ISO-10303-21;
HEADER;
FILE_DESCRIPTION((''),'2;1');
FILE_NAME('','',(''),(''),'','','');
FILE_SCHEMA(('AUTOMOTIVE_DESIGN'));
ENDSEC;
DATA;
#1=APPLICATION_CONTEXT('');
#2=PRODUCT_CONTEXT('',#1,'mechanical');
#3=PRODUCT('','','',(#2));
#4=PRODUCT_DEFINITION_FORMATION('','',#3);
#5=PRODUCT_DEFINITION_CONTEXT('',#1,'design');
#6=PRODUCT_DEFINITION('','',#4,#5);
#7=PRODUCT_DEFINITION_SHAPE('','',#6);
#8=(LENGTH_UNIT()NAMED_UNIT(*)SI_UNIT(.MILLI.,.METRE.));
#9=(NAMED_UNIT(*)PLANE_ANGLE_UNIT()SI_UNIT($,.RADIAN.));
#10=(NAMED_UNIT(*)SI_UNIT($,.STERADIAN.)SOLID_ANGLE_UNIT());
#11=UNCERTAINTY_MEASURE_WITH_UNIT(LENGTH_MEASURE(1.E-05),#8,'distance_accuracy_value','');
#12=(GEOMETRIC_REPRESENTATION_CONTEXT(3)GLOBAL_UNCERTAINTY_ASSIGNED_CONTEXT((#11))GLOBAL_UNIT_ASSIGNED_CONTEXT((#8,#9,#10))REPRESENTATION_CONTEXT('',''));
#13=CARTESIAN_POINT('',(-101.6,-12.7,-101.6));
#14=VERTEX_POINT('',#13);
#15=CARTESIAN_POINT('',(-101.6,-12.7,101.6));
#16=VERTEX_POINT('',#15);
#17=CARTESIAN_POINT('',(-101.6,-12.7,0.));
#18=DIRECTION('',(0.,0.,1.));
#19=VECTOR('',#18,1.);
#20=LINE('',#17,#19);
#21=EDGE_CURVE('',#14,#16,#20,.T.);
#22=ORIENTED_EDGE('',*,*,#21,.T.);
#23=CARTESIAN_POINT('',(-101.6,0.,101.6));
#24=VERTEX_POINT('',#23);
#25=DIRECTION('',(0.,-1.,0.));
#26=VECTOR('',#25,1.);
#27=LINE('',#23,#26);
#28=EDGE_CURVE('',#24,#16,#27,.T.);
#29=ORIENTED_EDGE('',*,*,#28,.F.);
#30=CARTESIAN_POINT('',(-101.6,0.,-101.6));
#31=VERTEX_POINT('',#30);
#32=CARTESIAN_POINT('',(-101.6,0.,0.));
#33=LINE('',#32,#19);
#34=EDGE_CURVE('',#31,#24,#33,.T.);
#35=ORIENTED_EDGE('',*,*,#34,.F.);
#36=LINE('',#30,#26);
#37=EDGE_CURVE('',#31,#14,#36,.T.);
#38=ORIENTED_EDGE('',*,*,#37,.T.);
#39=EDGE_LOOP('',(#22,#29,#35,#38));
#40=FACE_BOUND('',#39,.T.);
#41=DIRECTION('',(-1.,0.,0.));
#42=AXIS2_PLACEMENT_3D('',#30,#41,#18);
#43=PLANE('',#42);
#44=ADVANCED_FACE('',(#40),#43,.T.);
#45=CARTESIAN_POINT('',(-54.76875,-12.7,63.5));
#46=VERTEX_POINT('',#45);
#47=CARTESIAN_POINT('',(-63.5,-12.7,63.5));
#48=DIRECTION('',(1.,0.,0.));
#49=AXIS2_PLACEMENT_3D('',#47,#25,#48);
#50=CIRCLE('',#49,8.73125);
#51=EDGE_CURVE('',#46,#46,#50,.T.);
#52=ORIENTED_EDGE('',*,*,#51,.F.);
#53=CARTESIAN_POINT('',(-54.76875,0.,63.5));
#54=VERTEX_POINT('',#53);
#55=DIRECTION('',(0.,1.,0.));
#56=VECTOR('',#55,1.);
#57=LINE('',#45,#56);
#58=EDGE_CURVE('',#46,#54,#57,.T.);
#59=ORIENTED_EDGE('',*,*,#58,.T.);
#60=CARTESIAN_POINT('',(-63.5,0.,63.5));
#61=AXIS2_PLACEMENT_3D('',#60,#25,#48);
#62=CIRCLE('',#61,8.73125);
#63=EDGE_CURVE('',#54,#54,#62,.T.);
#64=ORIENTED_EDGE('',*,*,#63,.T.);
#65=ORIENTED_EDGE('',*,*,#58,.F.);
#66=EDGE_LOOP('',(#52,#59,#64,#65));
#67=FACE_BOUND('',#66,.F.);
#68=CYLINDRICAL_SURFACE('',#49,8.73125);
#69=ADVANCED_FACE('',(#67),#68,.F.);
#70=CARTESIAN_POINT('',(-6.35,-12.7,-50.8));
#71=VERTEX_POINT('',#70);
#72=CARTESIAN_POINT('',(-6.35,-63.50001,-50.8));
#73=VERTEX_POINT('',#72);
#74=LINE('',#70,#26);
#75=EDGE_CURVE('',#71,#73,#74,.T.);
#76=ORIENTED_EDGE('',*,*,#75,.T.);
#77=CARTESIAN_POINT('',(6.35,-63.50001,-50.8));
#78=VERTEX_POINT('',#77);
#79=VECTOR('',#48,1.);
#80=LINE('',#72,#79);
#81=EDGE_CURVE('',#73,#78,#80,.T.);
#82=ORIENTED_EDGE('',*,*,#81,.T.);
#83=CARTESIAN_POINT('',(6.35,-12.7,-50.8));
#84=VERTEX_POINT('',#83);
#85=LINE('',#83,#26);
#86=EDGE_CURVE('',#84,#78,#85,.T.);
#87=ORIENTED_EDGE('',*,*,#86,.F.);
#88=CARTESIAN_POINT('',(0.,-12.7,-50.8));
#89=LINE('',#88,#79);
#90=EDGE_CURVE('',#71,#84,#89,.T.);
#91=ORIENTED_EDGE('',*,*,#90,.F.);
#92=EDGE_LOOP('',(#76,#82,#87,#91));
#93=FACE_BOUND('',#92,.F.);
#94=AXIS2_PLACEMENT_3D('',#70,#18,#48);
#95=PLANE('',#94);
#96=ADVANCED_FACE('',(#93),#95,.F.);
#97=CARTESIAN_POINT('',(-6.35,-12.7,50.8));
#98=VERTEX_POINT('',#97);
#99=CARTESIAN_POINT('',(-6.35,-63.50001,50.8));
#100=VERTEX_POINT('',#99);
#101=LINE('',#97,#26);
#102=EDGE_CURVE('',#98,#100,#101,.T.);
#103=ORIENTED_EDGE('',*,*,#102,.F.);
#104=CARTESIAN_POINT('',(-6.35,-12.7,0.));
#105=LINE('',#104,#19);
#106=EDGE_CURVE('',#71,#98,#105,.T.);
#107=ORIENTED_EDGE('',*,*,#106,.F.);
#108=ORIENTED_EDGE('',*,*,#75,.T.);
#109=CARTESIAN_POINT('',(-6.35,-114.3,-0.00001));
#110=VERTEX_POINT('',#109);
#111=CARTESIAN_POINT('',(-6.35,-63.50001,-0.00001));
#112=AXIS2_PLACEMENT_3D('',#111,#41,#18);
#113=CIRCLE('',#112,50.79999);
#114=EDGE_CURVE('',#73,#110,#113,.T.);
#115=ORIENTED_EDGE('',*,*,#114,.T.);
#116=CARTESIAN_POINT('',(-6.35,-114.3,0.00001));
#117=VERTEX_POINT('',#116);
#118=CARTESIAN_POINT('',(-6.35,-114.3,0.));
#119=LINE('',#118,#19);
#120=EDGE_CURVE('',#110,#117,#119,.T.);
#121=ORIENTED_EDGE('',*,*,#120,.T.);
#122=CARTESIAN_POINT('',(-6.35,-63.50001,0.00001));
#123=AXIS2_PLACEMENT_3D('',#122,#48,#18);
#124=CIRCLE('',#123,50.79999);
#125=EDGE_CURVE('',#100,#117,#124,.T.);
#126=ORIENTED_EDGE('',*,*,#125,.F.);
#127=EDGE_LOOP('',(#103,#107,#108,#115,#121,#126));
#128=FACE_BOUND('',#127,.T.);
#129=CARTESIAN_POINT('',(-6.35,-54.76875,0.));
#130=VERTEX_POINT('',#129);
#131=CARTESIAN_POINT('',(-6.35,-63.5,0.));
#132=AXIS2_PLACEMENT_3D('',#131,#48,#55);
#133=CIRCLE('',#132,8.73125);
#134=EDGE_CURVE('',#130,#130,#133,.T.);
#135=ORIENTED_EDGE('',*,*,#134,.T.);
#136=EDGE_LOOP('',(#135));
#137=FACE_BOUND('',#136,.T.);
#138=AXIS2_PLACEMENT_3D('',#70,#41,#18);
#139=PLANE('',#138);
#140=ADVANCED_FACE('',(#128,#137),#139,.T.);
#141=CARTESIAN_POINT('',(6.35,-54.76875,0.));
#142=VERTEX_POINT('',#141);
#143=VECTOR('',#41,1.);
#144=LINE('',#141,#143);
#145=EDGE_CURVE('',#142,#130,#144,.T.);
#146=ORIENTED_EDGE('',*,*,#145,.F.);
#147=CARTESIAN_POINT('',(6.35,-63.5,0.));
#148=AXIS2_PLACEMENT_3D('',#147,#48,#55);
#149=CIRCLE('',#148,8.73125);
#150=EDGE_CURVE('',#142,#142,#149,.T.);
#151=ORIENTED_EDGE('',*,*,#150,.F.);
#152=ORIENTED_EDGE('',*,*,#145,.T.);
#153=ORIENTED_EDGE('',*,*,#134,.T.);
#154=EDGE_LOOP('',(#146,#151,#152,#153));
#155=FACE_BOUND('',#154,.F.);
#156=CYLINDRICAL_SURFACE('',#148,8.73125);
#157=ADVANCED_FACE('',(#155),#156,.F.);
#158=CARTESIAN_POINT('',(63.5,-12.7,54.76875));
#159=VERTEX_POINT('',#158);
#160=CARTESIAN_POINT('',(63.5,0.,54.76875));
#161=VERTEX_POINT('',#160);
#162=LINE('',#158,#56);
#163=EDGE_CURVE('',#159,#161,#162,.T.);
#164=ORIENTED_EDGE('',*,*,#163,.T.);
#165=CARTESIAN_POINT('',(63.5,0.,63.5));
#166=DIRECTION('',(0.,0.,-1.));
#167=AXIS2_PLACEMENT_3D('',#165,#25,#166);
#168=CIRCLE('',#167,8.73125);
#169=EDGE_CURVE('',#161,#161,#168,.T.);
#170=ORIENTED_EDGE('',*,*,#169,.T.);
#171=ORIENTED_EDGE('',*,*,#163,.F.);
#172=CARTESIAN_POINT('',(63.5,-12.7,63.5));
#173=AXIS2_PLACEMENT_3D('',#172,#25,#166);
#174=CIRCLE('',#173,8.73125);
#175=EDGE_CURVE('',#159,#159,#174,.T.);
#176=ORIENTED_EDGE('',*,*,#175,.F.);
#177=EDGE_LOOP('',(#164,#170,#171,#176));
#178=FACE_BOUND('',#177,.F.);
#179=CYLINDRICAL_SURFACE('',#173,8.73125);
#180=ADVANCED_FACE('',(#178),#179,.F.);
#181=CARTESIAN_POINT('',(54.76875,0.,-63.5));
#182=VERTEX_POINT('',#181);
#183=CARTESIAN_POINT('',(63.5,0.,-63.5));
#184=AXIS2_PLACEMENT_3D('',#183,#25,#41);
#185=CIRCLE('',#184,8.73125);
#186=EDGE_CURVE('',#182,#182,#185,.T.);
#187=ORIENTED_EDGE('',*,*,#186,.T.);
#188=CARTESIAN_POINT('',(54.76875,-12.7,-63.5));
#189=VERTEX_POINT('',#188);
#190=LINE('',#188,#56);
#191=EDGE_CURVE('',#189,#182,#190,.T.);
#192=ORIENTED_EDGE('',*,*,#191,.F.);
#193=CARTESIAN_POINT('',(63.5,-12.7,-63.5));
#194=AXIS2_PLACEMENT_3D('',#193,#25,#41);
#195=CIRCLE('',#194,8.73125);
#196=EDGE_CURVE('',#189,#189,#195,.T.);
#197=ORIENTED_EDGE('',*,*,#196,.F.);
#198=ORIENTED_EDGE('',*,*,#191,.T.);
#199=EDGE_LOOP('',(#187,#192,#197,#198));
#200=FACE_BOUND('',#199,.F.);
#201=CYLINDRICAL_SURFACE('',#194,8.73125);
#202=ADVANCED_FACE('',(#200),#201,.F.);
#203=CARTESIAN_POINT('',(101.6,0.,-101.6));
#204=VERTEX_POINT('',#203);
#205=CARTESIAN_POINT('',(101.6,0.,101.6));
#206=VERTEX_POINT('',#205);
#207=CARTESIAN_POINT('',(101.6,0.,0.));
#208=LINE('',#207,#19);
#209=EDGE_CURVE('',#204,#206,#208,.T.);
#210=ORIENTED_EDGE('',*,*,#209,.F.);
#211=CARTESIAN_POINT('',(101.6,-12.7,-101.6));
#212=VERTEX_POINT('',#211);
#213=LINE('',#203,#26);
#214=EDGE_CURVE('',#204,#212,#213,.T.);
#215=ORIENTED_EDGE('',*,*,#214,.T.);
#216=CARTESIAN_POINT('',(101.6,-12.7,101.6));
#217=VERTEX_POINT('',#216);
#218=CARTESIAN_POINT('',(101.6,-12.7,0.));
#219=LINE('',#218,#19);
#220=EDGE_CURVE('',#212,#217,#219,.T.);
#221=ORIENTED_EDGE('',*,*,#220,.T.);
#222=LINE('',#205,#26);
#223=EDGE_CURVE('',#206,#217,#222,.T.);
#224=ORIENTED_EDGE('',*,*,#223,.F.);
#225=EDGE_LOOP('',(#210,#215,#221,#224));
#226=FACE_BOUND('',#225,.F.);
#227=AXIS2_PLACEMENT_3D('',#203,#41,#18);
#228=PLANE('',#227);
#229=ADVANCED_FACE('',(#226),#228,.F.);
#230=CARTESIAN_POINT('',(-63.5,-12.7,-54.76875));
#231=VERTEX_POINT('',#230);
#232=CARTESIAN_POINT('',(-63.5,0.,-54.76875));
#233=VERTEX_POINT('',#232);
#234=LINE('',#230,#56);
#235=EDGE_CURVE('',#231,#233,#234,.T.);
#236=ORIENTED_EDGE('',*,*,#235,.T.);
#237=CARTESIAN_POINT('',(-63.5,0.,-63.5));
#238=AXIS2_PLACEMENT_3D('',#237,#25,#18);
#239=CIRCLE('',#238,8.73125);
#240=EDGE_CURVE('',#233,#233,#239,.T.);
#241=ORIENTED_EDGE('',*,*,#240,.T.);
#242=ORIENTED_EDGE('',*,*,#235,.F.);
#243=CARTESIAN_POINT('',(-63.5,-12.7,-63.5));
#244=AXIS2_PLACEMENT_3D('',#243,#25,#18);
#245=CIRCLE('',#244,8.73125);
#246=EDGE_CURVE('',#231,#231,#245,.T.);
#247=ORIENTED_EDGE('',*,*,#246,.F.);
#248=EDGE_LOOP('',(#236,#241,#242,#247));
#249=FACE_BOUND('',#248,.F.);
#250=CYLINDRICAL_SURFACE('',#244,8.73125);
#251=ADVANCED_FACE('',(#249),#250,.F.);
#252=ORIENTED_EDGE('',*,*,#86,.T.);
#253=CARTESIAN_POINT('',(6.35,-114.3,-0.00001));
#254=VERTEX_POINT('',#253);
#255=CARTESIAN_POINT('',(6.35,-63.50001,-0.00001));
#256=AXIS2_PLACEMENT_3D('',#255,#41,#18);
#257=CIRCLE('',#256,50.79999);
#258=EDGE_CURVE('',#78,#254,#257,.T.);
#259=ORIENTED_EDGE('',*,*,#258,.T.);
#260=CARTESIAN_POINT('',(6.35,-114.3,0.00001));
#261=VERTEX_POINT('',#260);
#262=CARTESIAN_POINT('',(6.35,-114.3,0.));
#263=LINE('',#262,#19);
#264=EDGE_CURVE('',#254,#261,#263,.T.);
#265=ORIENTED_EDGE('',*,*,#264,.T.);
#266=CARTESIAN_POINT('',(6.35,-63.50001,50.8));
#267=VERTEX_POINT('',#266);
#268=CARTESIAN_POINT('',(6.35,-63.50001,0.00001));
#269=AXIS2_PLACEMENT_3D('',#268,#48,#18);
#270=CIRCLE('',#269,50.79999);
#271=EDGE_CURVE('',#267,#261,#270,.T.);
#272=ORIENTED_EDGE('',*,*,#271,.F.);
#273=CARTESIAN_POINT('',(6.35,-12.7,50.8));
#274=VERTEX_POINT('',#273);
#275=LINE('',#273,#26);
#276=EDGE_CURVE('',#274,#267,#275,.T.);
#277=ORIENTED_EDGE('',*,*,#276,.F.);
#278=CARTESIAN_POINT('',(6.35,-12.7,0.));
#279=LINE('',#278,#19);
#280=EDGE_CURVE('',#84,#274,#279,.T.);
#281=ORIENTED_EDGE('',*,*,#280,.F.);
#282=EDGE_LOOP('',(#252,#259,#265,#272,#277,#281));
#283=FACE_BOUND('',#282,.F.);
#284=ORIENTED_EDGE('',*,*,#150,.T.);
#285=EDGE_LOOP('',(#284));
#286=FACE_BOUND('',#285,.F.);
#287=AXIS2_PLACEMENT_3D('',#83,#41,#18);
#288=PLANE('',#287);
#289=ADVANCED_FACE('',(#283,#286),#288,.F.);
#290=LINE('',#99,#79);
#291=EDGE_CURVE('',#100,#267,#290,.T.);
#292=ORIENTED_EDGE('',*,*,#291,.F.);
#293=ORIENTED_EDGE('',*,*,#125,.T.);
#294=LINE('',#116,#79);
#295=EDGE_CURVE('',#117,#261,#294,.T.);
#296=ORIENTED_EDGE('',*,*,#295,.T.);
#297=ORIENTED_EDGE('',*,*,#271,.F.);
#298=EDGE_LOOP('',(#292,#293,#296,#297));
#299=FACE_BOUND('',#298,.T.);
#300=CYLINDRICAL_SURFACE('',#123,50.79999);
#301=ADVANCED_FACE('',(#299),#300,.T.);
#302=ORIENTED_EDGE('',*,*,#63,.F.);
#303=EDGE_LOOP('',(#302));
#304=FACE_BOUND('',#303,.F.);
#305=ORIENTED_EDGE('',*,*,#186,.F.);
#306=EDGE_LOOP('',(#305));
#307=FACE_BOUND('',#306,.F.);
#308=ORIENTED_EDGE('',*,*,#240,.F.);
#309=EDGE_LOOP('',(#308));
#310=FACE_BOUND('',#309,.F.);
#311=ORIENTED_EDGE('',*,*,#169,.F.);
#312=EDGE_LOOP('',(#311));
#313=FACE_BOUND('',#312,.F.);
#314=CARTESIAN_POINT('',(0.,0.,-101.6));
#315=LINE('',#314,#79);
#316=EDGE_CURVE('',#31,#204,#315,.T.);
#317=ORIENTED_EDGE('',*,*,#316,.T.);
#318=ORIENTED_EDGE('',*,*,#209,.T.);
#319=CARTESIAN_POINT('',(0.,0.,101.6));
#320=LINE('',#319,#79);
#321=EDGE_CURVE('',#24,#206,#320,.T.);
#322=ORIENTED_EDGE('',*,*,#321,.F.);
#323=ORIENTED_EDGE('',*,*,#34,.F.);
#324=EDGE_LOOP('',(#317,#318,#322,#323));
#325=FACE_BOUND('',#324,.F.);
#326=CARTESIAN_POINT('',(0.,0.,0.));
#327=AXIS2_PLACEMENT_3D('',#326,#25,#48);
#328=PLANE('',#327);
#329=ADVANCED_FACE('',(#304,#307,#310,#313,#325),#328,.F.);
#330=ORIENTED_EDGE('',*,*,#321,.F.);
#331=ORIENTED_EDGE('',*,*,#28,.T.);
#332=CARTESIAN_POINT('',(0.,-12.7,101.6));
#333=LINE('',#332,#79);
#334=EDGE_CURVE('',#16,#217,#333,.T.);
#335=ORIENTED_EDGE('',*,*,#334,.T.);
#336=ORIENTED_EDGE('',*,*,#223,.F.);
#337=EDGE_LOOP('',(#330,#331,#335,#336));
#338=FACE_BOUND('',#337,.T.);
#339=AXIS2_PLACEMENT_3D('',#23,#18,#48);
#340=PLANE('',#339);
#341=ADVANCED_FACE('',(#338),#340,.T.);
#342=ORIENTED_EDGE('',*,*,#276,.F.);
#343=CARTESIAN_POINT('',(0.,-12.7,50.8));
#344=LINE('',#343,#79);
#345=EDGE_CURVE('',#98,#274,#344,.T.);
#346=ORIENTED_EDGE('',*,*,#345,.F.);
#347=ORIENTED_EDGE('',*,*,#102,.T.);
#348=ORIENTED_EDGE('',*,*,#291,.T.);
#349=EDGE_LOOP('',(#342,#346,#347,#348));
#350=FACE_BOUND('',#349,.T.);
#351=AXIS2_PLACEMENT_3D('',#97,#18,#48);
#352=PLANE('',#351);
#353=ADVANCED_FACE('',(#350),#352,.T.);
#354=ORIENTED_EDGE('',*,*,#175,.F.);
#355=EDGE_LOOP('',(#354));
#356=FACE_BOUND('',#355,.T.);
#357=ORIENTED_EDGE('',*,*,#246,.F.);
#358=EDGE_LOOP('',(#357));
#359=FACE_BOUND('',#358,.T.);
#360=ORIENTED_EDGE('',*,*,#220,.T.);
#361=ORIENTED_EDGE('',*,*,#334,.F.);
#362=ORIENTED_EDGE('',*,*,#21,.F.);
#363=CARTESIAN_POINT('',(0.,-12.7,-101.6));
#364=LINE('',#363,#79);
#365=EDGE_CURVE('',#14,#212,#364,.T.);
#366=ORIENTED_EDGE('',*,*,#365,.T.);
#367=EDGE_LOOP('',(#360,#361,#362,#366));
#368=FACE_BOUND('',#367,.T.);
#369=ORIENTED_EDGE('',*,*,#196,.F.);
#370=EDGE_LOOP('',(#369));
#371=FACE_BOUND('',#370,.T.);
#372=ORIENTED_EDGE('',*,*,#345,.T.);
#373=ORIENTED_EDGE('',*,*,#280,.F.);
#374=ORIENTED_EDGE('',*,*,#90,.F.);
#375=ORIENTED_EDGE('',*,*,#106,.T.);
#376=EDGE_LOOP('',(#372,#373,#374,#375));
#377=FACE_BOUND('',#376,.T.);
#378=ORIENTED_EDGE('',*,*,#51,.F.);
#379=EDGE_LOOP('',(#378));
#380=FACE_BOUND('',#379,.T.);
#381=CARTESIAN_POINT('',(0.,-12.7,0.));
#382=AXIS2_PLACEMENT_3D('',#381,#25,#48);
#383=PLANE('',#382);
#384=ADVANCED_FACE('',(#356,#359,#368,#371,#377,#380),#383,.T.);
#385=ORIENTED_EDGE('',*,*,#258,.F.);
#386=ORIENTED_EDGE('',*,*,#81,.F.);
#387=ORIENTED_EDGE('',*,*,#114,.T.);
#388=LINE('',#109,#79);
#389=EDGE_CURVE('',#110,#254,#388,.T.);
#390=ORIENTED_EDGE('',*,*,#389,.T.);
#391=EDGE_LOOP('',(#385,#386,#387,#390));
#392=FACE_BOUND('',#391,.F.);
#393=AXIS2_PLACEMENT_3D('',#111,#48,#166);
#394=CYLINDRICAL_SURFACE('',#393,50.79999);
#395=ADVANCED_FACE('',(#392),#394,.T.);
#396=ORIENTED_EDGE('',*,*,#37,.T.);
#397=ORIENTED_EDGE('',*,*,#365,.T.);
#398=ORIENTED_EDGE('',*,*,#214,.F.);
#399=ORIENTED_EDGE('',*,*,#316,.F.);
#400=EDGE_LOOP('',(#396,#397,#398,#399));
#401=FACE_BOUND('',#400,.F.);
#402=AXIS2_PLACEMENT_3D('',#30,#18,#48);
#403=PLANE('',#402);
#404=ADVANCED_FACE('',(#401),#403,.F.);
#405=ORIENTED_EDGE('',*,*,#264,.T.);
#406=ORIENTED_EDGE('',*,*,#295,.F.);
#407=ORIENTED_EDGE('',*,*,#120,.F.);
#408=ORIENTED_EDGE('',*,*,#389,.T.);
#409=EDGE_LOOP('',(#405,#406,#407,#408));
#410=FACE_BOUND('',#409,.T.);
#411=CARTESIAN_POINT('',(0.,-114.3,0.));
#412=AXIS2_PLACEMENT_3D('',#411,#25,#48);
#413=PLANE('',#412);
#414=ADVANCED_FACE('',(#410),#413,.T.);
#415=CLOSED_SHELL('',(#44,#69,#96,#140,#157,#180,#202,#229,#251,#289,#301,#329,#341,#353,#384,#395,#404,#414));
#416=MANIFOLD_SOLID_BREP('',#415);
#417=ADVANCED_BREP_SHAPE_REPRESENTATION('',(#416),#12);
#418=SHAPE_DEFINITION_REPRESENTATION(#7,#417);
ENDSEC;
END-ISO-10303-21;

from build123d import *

# Parameters (mm, degrees)
F0_W            = 203.2
F0_H            = 203.2
F1_DEPTH        = 12.7
F2_W            = 12.7
F2_H            = 101.6
F3_DEPTH        = 101.6
F4_R            = 50.79999
F5_R            = 8.73125
F6_DEPTH        = 25.4
F7_R            = 8.73125
F8_DEPTH        = 25.4
F8_COPIES_COUNT = 4


# Not quite as in the source:
# - a fillet or chamfer is up to 0.001 mm smaller than in the source, because OpenCascade refuses the exact size
# - a pattern or mirror of a feature is missing from the dataset's text; its kind, count and spacing are read off the source's solid


with BuildPart() as f1:
    # F0 (on Front) → F1 (new body)
    with BuildSketch(Plane.XZ):
        Rectangle(F0_W, F0_H)
    extrude(amount=F1_DEPTH)

    # F2 (on face) → F3 (join)
    with BuildSketch(Plane.XZ.offset(12.7)):
        Rectangle(F2_W, F2_H)
    extrude(amount=F3_DEPTH)

    # F4 (radius 50.8 in the source; OpenCascade refuses exactly that, so slightly less here)
    f4_edges = [f1.edges().sort_by_distance(p)[0] for p in [
        (0, -114.3, 50.8),
        (0, -114.3, -50.8),
    ]]
    fillet(f4_edges, radius=F4_R)

    # F5 (on face) → F6 (cut)
    with BuildSketch(Plane.YZ.offset(6.35)):
        with Locations((-63.5, 0)):
            Circle(F5_R)
    extrude(amount=-F6_DEPTH, mode=Mode.SUBTRACT)

    # F7 (on face) → F8 (cut)
    with BuildSketch(Plane.XZ.offset(12.7)):
        with Locations((-63.5, 63.5)):
            Circle(F7_R)
    f8 = extrude(amount=-F8_DEPTH, mode=Mode.SUBTRACT)

    # F8_copies: F8 ×4 about axis
    f8_copies_axis = Axis((0, 0, 0), (0, 1, 0))
    for i in range(1, F8_COPIES_COUNT):
        add(f8.rotate(f8_copies_axis, i * 360 / F8_COPIES_COUNT), mode=Mode.SUBTRACT)


solid = f1.part
